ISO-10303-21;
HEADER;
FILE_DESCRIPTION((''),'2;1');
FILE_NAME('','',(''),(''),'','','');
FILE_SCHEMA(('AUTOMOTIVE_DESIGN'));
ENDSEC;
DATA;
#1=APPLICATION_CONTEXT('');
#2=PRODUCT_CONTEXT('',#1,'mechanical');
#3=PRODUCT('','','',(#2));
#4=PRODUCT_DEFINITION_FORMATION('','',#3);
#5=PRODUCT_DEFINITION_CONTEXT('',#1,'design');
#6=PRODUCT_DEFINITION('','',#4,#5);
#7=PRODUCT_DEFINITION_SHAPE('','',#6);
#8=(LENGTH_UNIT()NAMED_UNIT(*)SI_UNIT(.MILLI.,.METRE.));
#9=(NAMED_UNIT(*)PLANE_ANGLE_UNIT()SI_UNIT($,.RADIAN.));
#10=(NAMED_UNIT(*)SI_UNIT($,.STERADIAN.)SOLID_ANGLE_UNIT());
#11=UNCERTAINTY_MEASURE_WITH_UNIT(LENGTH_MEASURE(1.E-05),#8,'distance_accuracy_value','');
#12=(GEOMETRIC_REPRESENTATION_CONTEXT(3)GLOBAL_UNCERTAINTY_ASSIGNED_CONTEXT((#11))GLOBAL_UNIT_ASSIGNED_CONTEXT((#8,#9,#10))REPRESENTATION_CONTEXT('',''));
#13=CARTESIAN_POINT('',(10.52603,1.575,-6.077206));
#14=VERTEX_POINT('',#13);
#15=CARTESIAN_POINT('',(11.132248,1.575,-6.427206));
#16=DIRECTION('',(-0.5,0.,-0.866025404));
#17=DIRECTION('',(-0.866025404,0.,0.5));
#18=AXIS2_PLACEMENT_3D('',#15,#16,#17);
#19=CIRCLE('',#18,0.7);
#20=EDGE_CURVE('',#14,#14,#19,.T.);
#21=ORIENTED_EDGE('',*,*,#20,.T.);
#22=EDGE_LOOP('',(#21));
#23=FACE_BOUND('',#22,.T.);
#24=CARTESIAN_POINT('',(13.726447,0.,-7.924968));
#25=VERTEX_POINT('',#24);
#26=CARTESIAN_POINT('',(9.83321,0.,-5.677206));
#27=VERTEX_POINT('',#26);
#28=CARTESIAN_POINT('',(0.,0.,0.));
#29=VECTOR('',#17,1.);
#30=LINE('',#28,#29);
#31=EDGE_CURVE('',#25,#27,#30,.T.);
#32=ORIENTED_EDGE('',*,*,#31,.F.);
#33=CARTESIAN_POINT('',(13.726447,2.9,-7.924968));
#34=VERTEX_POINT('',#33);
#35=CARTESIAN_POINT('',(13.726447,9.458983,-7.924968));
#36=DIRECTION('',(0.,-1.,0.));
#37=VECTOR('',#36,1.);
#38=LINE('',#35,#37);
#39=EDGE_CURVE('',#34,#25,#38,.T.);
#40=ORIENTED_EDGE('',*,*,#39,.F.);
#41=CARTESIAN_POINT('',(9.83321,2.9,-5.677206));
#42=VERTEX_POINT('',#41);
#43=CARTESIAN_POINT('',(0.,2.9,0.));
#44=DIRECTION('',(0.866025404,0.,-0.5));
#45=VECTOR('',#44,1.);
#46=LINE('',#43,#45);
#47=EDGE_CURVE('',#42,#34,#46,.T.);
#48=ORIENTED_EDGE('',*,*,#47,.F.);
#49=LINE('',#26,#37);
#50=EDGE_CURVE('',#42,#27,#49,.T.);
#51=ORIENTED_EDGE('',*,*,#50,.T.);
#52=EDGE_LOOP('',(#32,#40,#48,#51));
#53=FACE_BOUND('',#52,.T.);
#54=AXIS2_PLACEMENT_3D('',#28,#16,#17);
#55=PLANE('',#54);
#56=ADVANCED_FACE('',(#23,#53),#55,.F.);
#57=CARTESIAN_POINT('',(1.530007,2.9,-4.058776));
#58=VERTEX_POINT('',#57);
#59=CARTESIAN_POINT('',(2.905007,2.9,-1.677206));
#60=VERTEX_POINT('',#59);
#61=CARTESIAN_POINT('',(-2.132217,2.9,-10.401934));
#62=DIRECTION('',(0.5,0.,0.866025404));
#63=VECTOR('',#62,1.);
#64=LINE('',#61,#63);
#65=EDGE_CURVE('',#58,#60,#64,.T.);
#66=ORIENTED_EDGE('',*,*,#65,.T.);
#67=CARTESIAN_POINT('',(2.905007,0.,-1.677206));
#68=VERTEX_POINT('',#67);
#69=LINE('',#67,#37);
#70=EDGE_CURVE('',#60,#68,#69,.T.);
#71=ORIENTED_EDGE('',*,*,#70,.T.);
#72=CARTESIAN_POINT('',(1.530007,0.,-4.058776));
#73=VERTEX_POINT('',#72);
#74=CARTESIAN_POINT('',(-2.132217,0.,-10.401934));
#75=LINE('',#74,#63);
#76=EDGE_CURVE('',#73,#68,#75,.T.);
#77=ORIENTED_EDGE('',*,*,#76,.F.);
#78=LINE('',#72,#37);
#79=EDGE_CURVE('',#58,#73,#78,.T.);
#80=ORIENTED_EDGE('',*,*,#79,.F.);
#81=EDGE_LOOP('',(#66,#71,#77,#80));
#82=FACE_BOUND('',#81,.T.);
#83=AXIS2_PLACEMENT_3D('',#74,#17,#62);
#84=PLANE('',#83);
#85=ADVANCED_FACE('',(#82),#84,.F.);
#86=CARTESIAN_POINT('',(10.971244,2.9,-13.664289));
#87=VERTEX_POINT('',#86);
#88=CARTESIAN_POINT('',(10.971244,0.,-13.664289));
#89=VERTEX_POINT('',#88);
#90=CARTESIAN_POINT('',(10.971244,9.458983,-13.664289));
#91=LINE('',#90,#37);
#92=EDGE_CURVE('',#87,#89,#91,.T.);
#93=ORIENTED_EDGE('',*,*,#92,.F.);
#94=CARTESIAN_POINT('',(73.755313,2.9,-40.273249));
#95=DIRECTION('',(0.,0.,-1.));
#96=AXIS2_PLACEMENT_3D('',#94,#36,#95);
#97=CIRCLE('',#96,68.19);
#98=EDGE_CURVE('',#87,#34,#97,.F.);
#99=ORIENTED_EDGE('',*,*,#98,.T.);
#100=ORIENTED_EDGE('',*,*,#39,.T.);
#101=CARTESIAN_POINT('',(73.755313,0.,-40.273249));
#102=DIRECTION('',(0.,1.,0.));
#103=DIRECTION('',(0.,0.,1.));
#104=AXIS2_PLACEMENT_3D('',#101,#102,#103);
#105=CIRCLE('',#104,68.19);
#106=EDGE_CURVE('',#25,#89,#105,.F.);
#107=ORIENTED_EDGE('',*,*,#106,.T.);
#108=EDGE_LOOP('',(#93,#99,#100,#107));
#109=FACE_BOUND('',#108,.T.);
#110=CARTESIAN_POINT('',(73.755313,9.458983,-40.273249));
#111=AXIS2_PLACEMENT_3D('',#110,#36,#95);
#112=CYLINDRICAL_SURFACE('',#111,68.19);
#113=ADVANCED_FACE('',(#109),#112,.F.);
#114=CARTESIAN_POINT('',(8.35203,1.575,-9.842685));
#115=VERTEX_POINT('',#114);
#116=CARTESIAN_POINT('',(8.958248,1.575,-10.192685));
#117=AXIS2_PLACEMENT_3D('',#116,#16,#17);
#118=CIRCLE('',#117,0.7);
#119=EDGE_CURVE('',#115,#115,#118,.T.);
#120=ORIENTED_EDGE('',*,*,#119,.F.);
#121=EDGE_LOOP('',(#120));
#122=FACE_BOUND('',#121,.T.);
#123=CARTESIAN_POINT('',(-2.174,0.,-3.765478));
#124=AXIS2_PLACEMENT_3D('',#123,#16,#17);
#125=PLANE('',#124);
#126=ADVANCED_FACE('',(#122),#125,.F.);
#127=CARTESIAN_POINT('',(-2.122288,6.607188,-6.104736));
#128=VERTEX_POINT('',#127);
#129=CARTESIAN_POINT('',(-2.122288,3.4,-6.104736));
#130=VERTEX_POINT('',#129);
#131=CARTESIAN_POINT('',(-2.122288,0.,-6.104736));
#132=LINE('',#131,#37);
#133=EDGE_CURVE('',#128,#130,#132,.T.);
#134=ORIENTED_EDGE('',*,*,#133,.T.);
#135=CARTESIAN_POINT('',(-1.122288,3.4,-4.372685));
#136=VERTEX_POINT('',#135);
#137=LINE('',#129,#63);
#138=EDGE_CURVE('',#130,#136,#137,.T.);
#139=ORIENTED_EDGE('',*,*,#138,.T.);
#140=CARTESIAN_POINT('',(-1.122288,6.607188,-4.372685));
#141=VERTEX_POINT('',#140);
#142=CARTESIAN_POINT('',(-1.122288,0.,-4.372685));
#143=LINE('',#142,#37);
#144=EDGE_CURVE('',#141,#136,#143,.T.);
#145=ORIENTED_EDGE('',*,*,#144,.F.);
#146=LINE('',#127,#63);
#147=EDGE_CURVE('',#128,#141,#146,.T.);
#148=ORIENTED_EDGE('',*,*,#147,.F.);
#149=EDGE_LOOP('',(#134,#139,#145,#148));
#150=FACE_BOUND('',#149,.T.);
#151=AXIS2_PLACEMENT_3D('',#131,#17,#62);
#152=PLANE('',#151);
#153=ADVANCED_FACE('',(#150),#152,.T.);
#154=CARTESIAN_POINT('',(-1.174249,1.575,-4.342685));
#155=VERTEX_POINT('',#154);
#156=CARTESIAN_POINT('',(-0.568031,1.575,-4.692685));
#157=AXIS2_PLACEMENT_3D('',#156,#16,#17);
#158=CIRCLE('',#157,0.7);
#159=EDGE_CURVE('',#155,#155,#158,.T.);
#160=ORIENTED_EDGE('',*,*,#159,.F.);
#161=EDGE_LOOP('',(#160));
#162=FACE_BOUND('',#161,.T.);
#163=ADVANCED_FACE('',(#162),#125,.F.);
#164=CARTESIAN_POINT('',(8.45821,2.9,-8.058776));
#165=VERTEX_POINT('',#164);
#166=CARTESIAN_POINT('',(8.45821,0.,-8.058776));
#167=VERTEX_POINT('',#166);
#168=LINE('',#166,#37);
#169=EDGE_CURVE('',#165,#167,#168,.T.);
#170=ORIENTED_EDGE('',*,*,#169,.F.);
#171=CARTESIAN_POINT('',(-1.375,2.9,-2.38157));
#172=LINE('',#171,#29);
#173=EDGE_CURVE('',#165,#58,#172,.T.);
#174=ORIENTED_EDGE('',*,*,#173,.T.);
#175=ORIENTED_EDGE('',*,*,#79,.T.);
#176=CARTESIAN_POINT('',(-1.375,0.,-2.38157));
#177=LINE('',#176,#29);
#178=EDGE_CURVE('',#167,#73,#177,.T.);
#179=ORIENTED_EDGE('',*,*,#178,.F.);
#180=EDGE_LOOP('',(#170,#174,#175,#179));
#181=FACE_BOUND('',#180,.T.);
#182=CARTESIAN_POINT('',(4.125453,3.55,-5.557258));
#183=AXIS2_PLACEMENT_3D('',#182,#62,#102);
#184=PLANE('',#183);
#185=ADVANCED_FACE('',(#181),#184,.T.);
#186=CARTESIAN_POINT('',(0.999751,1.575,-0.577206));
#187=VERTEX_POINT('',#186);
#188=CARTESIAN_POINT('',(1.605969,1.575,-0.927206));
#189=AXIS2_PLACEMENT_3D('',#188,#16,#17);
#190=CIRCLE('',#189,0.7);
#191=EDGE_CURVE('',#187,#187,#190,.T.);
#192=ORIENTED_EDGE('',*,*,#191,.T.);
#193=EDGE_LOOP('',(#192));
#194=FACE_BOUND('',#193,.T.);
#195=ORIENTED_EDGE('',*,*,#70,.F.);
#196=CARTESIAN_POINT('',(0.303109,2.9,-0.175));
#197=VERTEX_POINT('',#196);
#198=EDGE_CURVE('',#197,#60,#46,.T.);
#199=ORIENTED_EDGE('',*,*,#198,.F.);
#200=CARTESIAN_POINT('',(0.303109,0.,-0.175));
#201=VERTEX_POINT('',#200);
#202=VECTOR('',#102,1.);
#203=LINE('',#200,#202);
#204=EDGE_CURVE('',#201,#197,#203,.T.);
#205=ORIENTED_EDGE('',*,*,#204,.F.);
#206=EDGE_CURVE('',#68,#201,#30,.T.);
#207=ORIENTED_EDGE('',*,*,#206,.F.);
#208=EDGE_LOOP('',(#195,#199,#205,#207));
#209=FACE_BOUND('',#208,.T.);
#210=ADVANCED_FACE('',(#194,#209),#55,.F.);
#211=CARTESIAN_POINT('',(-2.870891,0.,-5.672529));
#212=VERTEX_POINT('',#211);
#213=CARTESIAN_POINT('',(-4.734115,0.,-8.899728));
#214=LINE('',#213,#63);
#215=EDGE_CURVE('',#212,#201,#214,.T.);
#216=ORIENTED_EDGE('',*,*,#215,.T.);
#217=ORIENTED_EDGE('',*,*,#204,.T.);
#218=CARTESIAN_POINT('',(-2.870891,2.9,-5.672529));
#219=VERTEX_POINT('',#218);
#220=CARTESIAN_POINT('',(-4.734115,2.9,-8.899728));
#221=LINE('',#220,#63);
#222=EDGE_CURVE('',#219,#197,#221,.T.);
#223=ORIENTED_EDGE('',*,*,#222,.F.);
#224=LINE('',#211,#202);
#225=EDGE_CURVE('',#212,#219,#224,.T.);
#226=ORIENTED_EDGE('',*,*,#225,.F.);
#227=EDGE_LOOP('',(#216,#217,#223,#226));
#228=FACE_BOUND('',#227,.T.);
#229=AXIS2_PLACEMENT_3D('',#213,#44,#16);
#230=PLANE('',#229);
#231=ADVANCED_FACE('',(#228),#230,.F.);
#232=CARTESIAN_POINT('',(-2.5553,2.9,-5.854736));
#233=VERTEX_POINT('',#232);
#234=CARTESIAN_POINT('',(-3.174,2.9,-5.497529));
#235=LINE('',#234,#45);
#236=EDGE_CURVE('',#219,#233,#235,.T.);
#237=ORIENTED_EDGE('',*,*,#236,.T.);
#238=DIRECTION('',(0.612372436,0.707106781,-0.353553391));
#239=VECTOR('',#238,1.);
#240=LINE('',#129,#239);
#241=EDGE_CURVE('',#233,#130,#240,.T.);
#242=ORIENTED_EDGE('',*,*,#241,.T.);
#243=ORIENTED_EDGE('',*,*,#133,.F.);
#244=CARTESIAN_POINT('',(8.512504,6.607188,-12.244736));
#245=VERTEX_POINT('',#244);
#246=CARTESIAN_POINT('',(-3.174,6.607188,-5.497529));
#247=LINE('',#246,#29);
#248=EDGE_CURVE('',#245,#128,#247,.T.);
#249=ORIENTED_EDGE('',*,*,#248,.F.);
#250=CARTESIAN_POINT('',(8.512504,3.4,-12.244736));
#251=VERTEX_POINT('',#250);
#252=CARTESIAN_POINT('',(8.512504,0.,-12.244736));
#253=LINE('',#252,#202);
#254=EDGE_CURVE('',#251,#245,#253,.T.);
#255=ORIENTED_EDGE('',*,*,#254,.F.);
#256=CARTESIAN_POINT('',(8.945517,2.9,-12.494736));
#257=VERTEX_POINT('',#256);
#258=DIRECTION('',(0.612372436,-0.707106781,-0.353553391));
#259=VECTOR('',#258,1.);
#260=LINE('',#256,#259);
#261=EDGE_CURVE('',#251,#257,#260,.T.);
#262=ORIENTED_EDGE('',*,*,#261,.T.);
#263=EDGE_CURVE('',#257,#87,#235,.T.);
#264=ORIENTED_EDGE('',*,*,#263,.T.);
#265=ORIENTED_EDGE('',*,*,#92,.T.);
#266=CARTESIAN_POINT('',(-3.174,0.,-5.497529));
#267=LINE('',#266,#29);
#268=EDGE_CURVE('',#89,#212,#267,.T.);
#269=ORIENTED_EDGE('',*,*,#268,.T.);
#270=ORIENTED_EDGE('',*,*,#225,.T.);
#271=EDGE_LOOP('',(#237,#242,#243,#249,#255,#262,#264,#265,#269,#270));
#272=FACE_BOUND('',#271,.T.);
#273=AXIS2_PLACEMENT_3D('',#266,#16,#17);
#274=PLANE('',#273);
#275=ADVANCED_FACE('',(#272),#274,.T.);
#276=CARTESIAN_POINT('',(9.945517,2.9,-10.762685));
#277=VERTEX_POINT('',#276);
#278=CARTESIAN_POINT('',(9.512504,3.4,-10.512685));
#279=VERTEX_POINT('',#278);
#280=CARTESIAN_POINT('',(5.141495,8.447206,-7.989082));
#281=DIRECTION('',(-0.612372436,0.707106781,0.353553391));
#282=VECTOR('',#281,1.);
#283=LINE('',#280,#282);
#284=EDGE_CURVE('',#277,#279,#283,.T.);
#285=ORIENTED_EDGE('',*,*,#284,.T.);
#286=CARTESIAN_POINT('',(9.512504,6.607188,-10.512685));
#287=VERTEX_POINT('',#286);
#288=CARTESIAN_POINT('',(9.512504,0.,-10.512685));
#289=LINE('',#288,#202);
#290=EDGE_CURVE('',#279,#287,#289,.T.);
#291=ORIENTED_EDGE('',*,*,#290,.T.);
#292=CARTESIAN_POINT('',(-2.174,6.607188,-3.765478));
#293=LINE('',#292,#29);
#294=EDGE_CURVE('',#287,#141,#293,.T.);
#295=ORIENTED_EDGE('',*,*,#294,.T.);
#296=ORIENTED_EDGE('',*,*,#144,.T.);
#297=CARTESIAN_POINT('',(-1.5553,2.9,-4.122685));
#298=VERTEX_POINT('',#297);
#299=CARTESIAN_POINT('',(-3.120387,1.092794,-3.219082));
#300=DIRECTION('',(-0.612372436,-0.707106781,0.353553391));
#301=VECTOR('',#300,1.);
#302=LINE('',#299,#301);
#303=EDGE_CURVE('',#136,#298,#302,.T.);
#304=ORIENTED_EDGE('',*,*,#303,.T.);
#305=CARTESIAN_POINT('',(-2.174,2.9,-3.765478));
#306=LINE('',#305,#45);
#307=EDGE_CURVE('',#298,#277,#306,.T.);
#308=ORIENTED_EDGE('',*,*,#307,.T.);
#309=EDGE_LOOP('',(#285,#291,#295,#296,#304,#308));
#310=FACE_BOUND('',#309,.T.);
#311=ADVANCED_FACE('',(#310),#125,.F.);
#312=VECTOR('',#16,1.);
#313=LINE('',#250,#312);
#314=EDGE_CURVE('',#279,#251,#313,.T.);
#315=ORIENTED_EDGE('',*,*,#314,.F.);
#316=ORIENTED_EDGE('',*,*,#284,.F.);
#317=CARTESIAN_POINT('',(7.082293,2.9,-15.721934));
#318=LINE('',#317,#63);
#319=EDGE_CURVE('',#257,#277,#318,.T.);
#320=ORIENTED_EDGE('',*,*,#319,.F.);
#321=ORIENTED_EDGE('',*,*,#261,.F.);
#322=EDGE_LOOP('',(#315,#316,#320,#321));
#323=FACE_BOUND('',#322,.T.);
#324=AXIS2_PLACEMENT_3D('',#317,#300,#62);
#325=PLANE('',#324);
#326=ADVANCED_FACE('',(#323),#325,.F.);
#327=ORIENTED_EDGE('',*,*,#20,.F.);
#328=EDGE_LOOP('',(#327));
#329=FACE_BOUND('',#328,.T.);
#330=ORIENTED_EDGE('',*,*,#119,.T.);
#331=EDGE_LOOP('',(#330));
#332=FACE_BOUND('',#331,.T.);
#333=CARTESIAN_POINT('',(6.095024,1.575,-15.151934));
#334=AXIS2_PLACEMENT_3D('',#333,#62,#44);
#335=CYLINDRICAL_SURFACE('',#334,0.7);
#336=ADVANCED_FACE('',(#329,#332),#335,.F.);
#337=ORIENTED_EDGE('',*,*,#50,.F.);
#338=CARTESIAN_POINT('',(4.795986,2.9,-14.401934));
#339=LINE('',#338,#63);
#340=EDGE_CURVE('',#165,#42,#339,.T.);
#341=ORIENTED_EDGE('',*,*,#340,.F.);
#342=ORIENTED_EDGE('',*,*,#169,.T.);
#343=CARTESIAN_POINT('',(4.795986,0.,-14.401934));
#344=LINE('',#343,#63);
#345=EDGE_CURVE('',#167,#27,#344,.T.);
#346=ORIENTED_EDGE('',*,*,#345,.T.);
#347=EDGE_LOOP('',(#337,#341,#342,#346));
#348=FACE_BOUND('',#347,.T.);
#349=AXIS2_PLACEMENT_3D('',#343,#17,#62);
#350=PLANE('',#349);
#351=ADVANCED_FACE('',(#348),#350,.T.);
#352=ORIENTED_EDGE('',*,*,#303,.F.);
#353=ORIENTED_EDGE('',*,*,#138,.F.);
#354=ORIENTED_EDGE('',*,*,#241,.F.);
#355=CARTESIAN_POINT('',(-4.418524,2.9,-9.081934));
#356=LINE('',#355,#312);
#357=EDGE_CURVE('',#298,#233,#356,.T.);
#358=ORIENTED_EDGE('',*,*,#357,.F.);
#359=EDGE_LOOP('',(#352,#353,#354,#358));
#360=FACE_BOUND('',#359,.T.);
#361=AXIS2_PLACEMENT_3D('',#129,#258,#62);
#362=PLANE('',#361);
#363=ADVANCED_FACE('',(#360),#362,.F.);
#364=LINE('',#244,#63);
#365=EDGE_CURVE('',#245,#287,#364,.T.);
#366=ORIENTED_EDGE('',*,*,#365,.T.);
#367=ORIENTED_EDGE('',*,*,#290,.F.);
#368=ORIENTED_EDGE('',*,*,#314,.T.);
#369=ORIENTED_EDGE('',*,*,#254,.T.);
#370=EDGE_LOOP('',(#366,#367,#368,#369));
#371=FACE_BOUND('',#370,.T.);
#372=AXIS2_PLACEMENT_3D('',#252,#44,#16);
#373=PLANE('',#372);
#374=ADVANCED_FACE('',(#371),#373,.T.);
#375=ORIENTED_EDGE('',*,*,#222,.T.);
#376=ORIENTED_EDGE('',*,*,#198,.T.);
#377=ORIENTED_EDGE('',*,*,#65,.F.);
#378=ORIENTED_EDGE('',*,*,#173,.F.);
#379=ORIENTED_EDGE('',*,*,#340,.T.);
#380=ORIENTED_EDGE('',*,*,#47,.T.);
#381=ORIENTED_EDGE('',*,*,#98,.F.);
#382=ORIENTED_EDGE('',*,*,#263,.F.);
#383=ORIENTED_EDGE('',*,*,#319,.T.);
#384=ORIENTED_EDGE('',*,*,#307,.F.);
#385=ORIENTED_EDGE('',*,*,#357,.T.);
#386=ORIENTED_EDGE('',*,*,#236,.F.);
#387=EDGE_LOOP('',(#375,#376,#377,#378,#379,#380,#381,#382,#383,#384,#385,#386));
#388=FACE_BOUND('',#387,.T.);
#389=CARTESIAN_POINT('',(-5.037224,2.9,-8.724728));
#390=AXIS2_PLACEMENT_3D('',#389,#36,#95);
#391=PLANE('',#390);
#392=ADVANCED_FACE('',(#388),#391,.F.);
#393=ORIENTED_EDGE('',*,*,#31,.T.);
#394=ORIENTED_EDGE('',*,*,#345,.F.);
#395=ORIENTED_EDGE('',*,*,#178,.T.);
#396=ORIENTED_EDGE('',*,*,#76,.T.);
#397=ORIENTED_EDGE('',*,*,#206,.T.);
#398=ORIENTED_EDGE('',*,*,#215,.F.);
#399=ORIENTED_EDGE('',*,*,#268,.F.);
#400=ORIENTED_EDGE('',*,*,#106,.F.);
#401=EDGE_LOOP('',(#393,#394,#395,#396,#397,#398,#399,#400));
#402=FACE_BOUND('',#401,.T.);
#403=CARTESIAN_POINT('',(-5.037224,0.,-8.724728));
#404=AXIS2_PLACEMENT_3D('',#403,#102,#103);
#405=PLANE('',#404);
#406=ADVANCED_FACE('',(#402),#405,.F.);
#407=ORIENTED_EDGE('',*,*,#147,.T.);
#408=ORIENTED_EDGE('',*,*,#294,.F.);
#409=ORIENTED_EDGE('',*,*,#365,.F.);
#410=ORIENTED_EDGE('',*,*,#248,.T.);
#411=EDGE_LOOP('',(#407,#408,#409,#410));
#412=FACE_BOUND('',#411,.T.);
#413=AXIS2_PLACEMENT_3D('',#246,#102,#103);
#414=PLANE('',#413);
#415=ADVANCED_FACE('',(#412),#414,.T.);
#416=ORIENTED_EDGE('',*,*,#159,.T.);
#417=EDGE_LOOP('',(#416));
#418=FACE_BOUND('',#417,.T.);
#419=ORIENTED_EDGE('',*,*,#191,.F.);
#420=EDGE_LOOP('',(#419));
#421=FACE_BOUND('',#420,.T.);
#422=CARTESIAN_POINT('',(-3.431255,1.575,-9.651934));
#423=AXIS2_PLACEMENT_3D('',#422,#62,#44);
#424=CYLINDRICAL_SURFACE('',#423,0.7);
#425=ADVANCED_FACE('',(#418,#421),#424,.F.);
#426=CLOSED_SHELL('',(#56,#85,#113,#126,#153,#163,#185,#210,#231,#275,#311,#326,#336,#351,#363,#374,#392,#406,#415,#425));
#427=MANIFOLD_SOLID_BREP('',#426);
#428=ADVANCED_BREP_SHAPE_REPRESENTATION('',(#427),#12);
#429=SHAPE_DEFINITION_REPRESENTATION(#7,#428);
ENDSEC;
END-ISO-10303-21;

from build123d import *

# Parameters (mm, degrees)
SKETCH1_R             = 0.7
BOSS_EXTRUDE1_DEPTH   = 4.348
BOSS_EXTRUDE1_2_DEPTH = 4.348
SKETCH3_W             = 8
SKETCH3_H             = 2.9
BOSS_EXTRUDE2_DEPTH   = 1.598
BOSS_EXTRUDE3_DEPTH   = 2
MOVE_FACE1_BY         = 0.35
CHAMFER1_SIZE         = 0.5
BOSS_EXTRUDE4_DEPTH   = 2.9
MOVE_FACE2_DEPTH      = 2.9


# Read off the part's stored shape, not the designer's step: Move Face2
with BuildPart() as part:
    # Sketch1 → Boss-Extrude1 (new body)
    with BuildSketch(Plane(origin=(0, 0, 0), x_dir=(-0.8660254037844383, 0, 0.5000000000000009), z_dir=(-0.5000000000000008, 0, -0.8660254037844382))):
        Polygon((-11.354412945, 1.65), (-11.354412945, 2.9), (-16, 2.9), (-16, 0), (-11.354412945, 0), align=None)
        with Locations((-12.854412945, 1.575)):
            Circle(SKETCH1_R, mode=Mode.SUBTRACT)
    extrude(amount=BOSS_EXTRUDE1_DEPTH)



with BuildPart() as body_2:
    # Sketch1 → Boss-Extrude1 2 (new body)
    with BuildSketch(Plane(origin=(0, 0, 0), x_dir=(-0.8660254037844383, 0, 0.5000000000000009), z_dir=(-0.5000000000000008, 0, -0.8660254037844382))):
        Polygon((-3.354412945, 2.9), (-3.354412945, 1.65), (-3.354412945, 0), (0, 0), (0, 2.9), align=None)
        with Locations((-1.854412945, 1.575)):
            Circle(SKETCH1_R, mode=Mode.SUBTRACT)
    extrude(amount=BOSS_EXTRUDE1_2_DEPTH)


with BuildPart() as part_1:
    add(part.part)

    add(body_2.part)  # Boss-Extrude2 merges body 2
    # Sketch3 → Boss-Extrude2 (add)
    with BuildSketch(Plane(origin=(-2.174, 0, -3.765478456), x_dir=(-0.8660254037844384, 0, 0.5000000000000007), z_dir=(-0.5000000000000006, 0, -0.8660254037844383))):
        with Locations((-7.354412945, 1.45)):
            Rectangle(SKETCH3_W, SKETCH3_H)
    extrude(amount=-BOSS_EXTRUDE2_DEPTH)

    # Sketch4 → Boss-Extrude3 (add)
    with BuildSketch(Plane(origin=(-2.174, 0, -3.765478456), x_dir=(-0.8660254037844384, 0, 0.5000000000000007), z_dir=(-0.5000000000000006, 0, -0.8660254037844383))):
        Polygon((-1.214412945, 6.607188143), (-13.494412945, 6.607188143), (-13.494412945, 2.9), (-16, 2.9), (-16, 0), (0, 0), (0, 2.9), (-1.214412945, 2.9), align=None)
    extrude(amount=BOSS_EXTRUDE3_DEPTH)

    # Move Face1: a face moved inward by 0.35
    extrude(part_1.faces().sort_by_distance((-1.587, 1.45, -2.748764632))[0], amount=MOVE_FACE1_BY, dir=(0.866025404, 0, -0.5), mode=Mode.SUBTRACT)

    # Chamfer1
    chamfer1_edges = [part_1.edges().sort_by_distance(p)[0] for p in [
        (-1.622287539, 2.9, -5.238710332),
        (9.01250442, 2.9, -11.378710332),
    ]]
    chamfer(chamfer1_edges, length=CHAMFER1_SIZE)

    # Sketch5 → Boss-Extrude4 (add)
    with BuildSketch(Plane.XZ):
        with BuildLine():
            ThreePointArc((13.856406461, -8), (12.412098979, -10.837697405), (11.10213411, -13.739859135))
            Line((11.10213411, -13.739859135), (10.682406461, -13.497529263))
            Line((10.682406461, -13.497529263), (13.856406461, -8))
        make_face()
    extrude(amount=-BOSS_EXTRUDE4_DEPTH)

    # Move Face2 outline → Move Face2 (cut)
    with BuildSketch(Plane(origin=(0, 0, 0), x_dir=(1, 0, 0), z_dir=(0, 1, 0))):
        with BuildLine():
            ThreePointArc((10.97124357, 13.664289446), (12.281828843, 10.762456911), (13.726446616, 7.924967649))
            Line((13.726446616, 7.924967649), (13.856406461, 8))
            ThreePointArc((13.856406461, 8), (12.412098979, 10.837697405), (11.10213411, 13.739859135))
            Line((11.10213411, 13.739859135), (10.97124357, 13.664289446))
        make_face()
    extrude(amount=MOVE_FACE2_DEPTH, mode=Mode.SUBTRACT)


solid = part_1.part
